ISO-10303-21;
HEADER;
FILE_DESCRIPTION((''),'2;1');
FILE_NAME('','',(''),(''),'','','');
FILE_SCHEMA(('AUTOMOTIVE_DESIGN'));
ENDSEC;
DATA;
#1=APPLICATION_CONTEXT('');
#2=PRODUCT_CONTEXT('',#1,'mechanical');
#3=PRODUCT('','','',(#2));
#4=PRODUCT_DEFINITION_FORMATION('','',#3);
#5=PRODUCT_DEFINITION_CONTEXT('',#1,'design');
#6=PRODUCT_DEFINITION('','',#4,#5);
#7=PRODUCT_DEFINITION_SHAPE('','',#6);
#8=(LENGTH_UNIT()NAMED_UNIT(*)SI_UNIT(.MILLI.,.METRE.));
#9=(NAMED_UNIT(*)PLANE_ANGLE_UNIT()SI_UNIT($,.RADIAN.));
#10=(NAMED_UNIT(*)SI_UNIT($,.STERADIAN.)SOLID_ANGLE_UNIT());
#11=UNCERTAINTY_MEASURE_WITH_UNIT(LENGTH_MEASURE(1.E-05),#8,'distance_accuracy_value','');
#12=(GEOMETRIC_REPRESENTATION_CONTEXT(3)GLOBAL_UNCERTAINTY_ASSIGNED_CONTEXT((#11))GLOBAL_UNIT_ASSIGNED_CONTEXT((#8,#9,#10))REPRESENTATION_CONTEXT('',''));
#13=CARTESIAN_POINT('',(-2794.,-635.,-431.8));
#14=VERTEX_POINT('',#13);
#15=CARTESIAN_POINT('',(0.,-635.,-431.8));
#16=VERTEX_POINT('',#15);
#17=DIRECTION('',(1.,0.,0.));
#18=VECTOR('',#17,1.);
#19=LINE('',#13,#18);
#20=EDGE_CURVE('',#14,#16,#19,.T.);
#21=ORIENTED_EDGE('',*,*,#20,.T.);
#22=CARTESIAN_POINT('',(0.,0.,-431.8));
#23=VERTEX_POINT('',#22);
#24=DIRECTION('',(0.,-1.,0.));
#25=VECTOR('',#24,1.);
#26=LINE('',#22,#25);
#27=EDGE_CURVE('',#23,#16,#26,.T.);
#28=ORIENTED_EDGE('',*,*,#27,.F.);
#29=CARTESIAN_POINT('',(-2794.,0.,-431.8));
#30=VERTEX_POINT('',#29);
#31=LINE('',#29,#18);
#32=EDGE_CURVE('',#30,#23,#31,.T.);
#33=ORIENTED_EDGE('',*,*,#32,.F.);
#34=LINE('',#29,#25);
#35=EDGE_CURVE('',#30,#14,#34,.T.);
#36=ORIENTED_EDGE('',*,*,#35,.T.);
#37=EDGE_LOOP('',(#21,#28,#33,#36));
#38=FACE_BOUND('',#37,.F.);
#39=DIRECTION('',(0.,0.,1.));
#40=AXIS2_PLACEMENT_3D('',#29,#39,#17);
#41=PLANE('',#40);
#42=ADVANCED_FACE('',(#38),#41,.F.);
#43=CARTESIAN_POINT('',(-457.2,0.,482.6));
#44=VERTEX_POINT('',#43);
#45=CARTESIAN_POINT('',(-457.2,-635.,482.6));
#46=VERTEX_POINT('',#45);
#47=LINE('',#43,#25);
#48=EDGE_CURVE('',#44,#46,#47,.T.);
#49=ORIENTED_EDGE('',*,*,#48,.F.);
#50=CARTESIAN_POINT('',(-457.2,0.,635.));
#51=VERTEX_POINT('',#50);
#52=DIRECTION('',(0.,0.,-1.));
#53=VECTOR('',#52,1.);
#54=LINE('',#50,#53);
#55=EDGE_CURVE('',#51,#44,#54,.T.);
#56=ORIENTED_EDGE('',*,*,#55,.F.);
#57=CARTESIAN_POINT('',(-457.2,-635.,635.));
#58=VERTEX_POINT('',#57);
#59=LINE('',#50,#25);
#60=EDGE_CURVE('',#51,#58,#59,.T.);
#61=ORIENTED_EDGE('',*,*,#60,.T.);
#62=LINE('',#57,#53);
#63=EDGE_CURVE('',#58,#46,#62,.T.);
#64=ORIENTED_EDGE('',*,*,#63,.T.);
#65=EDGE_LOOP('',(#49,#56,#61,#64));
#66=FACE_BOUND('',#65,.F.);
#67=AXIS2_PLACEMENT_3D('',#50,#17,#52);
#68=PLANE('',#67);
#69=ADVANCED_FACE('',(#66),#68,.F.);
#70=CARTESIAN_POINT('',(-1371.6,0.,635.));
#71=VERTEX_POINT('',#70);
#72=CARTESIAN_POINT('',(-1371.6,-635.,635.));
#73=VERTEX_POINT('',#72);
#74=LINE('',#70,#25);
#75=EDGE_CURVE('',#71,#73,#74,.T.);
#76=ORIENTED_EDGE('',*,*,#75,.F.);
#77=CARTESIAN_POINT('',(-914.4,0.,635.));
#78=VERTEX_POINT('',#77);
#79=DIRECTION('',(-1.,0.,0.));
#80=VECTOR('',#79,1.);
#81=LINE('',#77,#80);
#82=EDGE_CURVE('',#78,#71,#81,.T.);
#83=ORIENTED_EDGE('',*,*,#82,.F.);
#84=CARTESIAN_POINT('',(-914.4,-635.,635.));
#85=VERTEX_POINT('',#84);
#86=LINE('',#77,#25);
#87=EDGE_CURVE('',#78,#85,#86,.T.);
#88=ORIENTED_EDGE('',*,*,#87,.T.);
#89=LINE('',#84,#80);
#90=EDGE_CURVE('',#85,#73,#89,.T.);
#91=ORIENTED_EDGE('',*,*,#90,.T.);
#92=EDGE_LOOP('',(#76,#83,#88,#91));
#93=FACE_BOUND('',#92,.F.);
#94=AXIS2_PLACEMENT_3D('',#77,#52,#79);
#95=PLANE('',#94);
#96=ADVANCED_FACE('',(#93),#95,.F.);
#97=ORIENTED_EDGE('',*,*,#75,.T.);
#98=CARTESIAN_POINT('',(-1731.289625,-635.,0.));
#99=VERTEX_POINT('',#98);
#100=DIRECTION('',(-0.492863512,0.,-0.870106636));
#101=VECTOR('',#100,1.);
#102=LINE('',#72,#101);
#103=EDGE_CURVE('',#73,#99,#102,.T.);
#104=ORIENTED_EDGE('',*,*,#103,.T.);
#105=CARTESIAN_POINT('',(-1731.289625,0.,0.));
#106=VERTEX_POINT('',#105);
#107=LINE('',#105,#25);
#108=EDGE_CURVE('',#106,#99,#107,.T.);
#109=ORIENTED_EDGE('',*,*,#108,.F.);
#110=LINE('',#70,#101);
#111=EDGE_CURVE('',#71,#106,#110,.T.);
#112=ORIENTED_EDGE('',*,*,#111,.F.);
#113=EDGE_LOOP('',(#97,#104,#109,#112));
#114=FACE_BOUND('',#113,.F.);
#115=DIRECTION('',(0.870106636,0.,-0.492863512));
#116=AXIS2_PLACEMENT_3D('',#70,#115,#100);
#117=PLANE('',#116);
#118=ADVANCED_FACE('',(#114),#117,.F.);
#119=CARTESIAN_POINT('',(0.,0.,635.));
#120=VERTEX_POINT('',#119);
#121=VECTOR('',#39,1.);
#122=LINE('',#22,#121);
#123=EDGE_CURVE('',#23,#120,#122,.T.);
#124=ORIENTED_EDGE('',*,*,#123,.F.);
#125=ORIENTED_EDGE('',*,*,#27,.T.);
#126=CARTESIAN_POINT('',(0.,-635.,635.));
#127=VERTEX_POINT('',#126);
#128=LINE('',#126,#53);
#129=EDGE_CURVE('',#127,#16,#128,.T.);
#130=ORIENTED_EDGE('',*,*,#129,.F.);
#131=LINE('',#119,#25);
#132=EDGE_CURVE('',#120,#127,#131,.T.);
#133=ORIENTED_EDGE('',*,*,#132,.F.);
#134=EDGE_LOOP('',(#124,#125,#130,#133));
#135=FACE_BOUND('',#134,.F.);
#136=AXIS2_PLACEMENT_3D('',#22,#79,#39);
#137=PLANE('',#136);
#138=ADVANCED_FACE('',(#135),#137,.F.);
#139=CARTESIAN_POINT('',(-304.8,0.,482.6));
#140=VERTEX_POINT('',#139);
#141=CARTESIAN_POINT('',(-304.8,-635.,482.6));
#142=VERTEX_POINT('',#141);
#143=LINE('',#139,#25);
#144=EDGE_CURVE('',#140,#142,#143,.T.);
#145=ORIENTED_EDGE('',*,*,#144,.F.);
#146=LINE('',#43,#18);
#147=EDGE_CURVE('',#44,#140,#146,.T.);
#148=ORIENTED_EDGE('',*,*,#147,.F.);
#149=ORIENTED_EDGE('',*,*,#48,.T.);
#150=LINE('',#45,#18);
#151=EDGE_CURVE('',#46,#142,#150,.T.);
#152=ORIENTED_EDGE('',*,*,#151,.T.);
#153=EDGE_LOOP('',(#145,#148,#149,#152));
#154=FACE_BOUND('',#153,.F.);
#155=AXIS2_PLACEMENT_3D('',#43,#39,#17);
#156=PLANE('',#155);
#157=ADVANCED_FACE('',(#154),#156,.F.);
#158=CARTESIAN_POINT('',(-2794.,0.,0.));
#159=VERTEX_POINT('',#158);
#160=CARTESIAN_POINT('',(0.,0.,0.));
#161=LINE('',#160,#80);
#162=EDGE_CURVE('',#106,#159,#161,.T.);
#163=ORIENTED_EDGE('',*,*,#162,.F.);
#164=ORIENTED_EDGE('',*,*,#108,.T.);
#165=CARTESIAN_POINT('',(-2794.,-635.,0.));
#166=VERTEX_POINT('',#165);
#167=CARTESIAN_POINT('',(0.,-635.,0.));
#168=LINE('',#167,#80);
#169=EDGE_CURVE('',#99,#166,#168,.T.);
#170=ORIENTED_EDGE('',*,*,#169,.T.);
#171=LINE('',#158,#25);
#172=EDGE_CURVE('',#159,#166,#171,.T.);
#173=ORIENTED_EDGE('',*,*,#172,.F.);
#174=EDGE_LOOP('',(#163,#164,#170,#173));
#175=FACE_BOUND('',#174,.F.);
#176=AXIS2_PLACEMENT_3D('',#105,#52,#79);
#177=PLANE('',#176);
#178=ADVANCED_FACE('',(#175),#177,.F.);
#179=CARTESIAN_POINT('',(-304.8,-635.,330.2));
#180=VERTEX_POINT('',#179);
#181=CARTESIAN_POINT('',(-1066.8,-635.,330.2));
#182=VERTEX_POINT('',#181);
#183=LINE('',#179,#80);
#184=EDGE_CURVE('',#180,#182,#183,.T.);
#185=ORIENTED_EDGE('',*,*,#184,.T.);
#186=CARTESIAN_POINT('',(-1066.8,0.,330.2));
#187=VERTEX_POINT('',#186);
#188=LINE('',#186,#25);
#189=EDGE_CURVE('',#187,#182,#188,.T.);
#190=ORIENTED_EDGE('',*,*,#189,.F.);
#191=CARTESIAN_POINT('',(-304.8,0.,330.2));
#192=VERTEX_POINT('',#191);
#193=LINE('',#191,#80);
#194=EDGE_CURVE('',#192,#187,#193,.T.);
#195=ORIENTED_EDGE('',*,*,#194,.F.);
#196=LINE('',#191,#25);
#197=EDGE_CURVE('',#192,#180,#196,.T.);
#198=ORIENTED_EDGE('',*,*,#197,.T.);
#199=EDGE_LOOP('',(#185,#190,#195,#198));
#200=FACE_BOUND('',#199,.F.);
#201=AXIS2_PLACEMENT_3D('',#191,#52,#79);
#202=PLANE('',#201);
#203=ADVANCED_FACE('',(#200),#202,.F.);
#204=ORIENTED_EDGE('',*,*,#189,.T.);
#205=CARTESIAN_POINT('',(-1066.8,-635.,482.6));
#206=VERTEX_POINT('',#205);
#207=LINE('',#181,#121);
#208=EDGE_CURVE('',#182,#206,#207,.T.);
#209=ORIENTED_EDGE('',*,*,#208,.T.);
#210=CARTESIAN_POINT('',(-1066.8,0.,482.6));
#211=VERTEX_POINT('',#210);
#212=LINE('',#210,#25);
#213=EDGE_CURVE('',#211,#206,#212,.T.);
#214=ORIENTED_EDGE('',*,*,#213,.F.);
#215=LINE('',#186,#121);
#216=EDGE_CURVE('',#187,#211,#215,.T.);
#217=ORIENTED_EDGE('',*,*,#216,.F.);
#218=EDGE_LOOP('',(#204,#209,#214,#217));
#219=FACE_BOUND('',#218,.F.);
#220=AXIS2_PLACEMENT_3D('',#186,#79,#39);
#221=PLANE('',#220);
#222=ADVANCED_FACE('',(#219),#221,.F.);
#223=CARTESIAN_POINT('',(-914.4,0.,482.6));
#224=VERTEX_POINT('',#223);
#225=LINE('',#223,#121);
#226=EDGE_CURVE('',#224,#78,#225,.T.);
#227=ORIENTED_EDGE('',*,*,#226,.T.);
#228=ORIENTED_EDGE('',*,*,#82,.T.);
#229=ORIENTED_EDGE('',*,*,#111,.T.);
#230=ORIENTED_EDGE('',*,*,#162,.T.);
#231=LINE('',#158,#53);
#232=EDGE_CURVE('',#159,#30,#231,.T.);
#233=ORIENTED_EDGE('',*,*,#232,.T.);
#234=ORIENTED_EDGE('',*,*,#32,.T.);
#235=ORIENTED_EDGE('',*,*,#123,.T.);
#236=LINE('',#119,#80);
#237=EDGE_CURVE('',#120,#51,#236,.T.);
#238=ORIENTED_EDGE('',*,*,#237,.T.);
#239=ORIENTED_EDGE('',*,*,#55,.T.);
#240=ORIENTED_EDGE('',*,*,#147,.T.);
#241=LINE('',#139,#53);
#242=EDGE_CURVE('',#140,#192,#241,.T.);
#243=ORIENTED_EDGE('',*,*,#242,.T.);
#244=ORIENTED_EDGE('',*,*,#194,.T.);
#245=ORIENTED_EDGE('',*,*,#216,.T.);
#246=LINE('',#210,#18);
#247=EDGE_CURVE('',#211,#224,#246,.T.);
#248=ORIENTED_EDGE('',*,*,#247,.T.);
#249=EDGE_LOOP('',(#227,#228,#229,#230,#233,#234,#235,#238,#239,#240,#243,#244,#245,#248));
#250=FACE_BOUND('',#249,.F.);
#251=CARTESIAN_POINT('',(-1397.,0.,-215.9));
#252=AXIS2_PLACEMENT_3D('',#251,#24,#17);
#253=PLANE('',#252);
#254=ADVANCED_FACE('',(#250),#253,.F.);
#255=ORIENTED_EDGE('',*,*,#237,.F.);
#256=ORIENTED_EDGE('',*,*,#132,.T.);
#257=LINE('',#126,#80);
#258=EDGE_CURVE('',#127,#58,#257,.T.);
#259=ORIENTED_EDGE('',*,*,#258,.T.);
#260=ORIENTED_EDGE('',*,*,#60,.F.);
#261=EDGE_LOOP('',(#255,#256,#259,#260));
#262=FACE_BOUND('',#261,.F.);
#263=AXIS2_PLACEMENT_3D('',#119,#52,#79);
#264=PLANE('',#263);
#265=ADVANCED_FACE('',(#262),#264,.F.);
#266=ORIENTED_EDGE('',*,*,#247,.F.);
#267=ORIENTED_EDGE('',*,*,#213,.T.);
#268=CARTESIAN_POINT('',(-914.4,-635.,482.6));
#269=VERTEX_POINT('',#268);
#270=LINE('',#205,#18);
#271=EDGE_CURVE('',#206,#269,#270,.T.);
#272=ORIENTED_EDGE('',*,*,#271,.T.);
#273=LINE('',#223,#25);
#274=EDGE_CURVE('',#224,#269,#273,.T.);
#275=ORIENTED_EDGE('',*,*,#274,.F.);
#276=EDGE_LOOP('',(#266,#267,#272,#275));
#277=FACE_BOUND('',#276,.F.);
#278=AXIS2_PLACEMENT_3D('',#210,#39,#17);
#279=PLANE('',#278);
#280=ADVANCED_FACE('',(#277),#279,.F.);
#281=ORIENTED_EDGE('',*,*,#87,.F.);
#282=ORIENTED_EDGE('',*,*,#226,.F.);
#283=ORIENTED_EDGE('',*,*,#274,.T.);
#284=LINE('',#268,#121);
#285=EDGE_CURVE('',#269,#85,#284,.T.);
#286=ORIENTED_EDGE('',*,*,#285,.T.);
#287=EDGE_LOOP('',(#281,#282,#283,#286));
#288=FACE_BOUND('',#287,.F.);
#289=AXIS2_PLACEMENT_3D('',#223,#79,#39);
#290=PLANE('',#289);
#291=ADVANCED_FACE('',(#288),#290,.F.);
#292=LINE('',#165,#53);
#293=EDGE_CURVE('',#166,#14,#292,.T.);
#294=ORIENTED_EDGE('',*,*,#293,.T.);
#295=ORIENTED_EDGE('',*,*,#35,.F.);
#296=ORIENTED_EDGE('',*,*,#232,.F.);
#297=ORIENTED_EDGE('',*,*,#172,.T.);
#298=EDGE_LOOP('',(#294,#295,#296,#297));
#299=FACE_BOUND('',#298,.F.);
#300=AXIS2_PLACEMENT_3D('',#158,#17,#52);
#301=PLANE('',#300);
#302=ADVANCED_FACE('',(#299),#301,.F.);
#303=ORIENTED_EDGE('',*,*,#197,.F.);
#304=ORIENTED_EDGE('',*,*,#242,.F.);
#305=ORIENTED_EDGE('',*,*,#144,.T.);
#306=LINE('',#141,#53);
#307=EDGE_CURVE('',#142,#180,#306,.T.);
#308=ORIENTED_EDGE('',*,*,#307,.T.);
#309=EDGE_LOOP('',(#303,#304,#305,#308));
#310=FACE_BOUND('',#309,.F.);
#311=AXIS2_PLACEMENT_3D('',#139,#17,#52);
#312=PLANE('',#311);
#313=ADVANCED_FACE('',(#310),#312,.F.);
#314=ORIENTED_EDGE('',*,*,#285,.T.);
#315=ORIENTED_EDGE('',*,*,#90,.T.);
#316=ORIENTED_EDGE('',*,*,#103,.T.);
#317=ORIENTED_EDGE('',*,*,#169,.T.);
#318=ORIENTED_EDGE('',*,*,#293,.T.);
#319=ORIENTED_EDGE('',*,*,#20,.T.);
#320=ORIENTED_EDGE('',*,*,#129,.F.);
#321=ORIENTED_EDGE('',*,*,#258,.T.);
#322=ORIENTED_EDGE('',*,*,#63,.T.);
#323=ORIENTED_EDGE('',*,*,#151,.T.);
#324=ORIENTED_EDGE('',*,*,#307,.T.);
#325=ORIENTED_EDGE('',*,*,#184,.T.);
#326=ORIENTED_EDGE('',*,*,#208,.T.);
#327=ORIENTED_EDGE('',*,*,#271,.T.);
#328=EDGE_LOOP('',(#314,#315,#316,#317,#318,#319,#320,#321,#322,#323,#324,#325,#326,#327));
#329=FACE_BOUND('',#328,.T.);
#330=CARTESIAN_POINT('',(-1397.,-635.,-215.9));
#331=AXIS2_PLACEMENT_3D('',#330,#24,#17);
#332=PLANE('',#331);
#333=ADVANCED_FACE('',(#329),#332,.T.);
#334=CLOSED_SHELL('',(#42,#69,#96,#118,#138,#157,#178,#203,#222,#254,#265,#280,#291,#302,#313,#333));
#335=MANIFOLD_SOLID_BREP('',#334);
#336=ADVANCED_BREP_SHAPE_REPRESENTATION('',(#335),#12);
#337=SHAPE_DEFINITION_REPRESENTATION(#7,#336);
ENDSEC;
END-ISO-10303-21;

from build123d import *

# Parameters (mm, degrees)
F2_DEPTH = 635
F3_DEPTH = 635


with BuildPart() as f2:
    # F1 (on face) → F2 (new body)
    with BuildSketch(Plane.XZ):
        Polygon((0, -431.8), (0, 0), (-1524, 0), (-1731.2896251678, 0), (-2540, 0), (-2794, 0), (-2794, -431.8), align=None)
        Polygon((-1524, 0), (0, 0), (0, 635), (-457.2, 635), (-457.2, 482.6), (-304.8, 482.6), (-304.8, 330.2), (-1066.8, 330.2), (-1066.8, 482.6), (-914.4, 482.6), (-914.4, 635), (-1371.6, 635), (-1731.2896251678, 0), align=None)
    extrude(amount=F2_DEPTH)

    # F0 (on Front) → F3 (join)
    with BuildSketch(Plane.XZ):
        Polygon((-1731.2896251678, 0), (0, 0), (0, 635), (-457.2, 635), (-457.2, 482.6), (-304.8, 482.6), (-304.8, 330.2), (-1066.8, 330.2), (-1066.8, 482.6), (-914.4, 482.6), (-914.4, 635), (-1371.6, 635), align=None)
    extrude(amount=F3_DEPTH)


solid = f2.part
